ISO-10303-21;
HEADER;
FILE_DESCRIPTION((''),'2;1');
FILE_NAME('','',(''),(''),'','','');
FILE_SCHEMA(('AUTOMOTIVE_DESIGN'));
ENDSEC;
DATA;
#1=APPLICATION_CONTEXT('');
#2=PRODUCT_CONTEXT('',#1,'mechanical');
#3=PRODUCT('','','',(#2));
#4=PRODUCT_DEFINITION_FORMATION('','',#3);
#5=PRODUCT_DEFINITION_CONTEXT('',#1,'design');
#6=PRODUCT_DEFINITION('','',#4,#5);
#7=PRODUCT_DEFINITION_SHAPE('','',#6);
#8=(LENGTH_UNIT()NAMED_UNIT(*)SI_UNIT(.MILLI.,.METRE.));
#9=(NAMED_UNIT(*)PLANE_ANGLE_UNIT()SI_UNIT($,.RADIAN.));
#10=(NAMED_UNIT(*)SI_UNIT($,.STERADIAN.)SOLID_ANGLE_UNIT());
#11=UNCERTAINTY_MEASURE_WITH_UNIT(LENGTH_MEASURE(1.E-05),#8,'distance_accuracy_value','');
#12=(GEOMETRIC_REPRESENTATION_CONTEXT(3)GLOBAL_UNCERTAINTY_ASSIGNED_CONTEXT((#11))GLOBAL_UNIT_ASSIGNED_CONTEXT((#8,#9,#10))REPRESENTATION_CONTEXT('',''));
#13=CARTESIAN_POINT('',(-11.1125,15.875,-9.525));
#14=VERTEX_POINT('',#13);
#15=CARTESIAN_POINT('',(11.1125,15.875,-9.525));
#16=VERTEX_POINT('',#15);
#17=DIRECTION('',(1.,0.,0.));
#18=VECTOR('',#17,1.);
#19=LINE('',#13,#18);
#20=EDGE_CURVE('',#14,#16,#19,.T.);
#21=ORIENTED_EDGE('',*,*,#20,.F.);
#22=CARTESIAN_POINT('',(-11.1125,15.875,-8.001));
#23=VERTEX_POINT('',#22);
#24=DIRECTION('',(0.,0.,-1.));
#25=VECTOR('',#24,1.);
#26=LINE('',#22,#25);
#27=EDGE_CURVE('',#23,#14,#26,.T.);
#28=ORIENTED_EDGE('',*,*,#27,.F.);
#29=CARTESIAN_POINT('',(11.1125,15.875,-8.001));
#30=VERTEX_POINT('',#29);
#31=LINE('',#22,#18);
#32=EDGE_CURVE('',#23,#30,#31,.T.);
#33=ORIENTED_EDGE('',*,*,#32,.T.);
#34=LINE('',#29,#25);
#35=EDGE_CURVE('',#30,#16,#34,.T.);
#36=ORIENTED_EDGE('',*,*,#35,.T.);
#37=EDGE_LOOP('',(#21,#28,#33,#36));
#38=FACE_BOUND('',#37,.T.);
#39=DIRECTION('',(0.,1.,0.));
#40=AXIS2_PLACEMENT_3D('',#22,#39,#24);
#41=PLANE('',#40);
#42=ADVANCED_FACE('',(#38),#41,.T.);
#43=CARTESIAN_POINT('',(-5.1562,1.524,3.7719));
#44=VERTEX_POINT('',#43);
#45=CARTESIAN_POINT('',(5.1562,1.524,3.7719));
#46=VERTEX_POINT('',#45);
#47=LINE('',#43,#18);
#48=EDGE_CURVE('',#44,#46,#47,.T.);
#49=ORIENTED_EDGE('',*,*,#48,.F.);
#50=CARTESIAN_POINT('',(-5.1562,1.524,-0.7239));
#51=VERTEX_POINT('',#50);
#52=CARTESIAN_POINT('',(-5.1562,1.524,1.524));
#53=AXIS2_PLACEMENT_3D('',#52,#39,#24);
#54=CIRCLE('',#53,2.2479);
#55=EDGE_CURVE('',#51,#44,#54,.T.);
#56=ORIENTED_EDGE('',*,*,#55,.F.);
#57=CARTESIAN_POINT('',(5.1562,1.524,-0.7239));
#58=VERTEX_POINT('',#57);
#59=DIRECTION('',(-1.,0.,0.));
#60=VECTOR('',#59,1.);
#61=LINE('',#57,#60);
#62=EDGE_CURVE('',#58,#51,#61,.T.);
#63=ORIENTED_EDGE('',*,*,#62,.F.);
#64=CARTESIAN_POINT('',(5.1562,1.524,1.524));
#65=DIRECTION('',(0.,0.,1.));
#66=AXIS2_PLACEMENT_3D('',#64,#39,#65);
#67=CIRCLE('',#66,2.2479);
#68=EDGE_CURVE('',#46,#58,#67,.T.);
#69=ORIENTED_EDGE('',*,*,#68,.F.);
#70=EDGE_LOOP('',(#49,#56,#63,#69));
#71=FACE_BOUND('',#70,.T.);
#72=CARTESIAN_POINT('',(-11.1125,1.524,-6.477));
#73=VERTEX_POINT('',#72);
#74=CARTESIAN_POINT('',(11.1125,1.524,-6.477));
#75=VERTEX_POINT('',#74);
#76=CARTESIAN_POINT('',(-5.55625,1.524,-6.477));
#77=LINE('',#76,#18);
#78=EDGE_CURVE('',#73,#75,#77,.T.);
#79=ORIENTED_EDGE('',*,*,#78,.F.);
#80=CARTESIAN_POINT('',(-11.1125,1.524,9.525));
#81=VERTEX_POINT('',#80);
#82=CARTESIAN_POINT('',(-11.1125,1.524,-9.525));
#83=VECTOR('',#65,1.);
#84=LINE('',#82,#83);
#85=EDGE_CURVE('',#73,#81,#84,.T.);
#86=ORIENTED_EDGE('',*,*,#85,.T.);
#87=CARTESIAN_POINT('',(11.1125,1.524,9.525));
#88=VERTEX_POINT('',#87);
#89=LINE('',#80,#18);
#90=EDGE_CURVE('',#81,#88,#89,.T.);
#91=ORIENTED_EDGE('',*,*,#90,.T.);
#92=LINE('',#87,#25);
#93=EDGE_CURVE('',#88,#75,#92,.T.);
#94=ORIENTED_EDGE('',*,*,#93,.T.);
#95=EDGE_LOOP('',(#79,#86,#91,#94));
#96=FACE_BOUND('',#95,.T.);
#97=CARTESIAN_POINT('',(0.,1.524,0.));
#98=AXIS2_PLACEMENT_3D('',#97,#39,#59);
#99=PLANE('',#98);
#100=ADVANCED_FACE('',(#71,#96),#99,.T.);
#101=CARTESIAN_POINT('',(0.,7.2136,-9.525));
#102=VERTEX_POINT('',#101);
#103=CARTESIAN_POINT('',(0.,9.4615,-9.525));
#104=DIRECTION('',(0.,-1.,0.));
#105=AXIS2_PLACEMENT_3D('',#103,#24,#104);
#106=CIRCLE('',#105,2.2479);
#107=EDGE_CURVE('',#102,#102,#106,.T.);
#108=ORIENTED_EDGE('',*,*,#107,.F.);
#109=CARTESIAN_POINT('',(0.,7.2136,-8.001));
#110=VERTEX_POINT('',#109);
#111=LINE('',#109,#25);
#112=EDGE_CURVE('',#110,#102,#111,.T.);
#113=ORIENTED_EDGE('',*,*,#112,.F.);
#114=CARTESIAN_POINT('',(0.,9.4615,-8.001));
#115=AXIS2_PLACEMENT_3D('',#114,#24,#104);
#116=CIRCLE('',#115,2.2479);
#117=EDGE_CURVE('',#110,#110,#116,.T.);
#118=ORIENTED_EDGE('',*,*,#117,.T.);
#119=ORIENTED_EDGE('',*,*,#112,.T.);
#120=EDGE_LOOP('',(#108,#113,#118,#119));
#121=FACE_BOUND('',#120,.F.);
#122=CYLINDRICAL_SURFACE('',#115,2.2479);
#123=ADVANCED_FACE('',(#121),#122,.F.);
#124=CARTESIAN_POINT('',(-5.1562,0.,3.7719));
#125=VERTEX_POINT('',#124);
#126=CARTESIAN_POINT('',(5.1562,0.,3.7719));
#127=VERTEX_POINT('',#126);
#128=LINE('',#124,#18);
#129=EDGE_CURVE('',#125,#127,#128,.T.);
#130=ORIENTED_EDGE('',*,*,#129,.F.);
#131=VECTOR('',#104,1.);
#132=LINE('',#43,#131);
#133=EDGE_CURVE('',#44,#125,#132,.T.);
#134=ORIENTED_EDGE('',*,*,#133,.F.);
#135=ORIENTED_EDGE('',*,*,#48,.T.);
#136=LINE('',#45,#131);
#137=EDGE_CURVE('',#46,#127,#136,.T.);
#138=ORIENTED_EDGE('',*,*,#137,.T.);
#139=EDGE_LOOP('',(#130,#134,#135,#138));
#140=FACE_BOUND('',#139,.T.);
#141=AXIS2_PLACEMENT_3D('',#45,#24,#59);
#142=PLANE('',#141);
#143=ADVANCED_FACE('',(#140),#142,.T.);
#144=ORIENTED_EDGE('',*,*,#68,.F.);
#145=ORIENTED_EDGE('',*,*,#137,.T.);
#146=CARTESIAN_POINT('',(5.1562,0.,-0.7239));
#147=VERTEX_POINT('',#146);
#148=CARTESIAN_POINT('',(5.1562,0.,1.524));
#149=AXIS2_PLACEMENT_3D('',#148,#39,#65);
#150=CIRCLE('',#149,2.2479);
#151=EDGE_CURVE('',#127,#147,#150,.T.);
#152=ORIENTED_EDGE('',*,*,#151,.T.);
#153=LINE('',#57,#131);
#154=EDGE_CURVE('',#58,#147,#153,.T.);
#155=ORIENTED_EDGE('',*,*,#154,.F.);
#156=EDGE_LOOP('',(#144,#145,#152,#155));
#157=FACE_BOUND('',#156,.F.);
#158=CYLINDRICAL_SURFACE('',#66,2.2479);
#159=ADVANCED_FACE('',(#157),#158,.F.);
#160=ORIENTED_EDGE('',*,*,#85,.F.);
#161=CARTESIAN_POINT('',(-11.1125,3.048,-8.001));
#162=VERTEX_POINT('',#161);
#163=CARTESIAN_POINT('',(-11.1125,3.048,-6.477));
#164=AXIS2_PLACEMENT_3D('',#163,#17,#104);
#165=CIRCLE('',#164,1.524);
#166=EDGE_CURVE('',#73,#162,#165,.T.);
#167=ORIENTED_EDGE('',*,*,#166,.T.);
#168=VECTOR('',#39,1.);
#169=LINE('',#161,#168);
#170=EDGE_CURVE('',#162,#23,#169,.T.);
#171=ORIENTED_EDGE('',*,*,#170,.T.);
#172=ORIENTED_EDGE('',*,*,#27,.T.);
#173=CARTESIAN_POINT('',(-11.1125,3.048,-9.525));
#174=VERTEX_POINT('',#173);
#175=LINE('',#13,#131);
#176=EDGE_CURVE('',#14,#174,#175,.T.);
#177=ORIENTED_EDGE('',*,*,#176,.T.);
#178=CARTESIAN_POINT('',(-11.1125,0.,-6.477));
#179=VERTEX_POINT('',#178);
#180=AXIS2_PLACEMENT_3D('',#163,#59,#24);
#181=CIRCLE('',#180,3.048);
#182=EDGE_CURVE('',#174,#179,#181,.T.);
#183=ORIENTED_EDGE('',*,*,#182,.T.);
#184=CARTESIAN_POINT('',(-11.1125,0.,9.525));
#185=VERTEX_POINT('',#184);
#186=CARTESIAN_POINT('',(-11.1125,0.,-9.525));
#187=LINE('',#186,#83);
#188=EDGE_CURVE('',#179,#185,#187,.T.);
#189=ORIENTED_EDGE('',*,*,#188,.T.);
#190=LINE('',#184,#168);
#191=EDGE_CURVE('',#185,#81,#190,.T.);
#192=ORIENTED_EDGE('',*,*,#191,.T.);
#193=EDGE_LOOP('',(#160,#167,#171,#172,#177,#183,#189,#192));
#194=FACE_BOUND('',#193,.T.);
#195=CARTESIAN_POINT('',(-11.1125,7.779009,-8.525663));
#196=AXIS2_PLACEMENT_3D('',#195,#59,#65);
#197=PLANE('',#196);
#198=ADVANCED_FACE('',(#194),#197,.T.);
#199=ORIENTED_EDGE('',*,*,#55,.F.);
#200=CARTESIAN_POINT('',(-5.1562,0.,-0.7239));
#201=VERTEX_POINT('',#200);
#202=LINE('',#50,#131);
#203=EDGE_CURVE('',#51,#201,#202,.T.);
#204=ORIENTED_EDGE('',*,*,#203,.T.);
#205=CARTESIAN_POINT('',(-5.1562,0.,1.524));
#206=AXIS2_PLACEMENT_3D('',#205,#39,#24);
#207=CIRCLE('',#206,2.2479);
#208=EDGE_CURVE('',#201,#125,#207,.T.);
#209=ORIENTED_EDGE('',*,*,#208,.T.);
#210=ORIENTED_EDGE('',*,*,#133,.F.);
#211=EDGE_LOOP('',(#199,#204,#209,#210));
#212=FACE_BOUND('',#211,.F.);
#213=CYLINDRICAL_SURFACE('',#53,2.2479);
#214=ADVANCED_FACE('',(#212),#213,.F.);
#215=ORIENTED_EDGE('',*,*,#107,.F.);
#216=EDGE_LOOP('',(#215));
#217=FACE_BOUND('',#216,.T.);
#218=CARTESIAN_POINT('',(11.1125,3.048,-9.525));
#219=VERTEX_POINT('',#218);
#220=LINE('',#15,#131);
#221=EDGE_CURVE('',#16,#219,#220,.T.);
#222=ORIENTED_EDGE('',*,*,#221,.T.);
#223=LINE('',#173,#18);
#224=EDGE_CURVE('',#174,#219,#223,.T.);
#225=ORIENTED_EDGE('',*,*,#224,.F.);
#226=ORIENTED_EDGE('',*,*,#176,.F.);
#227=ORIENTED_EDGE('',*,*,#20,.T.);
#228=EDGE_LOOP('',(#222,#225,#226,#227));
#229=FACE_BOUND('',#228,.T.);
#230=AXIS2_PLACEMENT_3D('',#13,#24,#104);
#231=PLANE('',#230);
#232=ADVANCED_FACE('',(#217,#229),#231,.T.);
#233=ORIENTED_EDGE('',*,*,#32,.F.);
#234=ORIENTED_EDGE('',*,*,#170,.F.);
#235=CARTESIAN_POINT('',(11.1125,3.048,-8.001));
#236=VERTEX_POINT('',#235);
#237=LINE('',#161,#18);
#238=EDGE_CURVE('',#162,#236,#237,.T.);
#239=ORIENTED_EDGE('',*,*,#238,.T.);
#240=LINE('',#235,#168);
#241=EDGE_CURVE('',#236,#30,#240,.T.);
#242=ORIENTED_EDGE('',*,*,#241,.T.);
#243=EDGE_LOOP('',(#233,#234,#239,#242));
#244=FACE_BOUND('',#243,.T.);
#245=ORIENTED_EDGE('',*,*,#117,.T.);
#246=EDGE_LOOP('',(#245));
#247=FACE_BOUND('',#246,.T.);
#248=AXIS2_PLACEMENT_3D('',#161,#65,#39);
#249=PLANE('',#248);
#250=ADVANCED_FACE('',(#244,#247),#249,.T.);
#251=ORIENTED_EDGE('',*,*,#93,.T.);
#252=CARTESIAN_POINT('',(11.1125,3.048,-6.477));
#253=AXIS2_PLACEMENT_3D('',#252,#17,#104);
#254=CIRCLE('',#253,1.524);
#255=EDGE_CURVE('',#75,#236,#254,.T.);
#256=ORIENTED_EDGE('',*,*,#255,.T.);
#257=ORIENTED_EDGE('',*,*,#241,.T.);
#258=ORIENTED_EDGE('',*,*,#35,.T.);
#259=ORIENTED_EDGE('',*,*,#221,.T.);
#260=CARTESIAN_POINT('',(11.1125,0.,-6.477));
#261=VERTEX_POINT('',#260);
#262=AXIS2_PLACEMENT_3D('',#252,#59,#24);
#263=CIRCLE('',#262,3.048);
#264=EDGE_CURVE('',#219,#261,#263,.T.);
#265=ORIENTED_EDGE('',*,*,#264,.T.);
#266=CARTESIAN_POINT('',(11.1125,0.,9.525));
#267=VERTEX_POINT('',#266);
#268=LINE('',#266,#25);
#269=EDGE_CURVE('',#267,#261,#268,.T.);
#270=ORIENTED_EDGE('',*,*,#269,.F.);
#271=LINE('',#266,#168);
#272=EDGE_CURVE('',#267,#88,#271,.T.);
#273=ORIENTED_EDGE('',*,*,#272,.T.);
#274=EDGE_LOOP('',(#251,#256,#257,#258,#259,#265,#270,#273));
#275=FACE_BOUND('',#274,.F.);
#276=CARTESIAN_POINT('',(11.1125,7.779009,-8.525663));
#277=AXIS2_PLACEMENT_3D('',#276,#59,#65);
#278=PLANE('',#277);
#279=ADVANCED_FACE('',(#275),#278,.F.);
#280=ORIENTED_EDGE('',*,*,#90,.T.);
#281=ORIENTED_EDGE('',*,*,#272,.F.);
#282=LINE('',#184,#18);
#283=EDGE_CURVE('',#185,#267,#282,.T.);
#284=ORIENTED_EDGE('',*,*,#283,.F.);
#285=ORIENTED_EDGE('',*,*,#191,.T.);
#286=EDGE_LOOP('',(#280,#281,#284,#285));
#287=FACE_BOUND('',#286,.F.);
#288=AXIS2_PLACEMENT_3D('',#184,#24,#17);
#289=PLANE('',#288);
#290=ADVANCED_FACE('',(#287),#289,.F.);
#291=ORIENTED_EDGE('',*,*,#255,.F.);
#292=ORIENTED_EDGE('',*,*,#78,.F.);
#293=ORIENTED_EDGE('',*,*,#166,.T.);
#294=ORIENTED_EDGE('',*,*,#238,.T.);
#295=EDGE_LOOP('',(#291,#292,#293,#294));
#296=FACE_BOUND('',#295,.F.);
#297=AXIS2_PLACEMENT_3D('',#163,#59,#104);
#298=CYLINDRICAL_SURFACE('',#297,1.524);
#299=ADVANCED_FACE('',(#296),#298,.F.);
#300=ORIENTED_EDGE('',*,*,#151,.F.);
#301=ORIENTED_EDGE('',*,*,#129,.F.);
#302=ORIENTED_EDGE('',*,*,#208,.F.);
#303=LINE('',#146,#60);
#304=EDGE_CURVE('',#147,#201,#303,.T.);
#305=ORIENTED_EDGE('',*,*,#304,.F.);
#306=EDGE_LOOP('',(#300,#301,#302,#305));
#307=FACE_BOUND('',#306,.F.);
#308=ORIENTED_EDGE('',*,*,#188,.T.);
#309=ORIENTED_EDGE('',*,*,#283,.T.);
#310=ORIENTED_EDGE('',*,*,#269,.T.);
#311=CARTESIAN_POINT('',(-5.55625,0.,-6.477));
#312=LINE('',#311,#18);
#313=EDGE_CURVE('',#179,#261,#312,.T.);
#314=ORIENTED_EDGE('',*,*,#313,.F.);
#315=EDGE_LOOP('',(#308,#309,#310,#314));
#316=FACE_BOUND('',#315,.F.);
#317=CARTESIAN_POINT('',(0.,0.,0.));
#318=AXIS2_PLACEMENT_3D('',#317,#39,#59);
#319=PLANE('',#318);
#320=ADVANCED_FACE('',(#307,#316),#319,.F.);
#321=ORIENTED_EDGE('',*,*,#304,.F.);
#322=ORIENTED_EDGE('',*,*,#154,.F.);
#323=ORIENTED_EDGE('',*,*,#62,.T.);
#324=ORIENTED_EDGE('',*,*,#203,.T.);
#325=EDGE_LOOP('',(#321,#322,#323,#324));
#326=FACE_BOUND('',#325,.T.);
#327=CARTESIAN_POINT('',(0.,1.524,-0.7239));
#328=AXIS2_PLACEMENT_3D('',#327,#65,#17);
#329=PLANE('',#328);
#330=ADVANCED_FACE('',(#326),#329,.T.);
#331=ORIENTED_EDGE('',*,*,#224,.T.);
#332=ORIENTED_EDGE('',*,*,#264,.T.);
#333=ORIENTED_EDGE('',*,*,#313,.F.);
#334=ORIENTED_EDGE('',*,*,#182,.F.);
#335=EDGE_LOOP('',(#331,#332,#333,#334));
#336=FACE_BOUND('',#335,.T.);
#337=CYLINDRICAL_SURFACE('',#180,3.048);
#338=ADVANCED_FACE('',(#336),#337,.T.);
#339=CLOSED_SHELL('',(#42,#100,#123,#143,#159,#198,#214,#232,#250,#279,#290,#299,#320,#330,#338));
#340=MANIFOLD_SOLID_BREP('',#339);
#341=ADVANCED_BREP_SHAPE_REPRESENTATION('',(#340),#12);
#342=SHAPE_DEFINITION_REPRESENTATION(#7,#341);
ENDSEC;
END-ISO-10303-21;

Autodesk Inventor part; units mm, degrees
ref_plane "YZ Plane" through (0, 0, 0) normal (1, 0, 0) x (0, 1, 0)
ref_plane "XZ Plane" through (0, 0, 0) normal (0, 1, 0) x (-1, 0, 0)
ref_plane "XY Plane" through (0, 0, 0) normal (0, 0, 1) x (1, 0, 0)
sketch "Sketch1" plane through (0, 0, 0) normal (0, 1, 0) x (-1, 0, 0)
  line L0 (11.1125, 9.525) -> (-11.1125, 9.525)
  line L1 (-11.1125, 9.525) -> (-11.1125, -9.525)
  line L2 (-11.1125, -9.525) -> (11.1125, -9.525)
  line L3 (11.1125, -9.525) -> (11.1125, 9.525)
  line L4 (11.1125, 9.525) -> (-11.1125, -9.525) construction
  line L5 (-11.1125, 9.525) -> (11.1125, -9.525) construction
  point P0 (0, 0)
  dimension "d0" = 22.225
  dimension "d1" = 19.05
extrude "Plate1" add sketch "Sketch1" along normal blind 1.524
sketch "Sketch2" plane through (-11.1125, 0, -8.001) normal (0, 0, -1) x (-1, 0, 0)
  line L0 (-22.225, 0) -> (0, 0)
  line L1 (0, 0) -> (0, 15.875)
  line L2 (0, 15.875) -> (-22.225, 15.875)
  line L3 (-22.225, 15.875) -> (-22.225, 0)
edge flange "Flange1" height 15.875 angle 90 thickness 1.524 bend radius 1.524 thickness toward (0, 0, -1) relief tear relief width 1.524 relief depth 0.762 edges at (0, 1.524, -9.525) wall of the first edge with corners at (11.1125, 0, -8.001) (-11.1125, 0, -8.001) (-11.1125, 15.875, -8.001) (11.1125, 15.875, -8.001)
bend "Bend1"
corner "Corner1"
sketch "Sketch3" plane through (0, 1.524, 0) normal (0, 1, 0) x (1, 0, 0)
  line L0 (11.1125, 6.477) -> (-11.1125, 6.477) projected
  line L1 (-11.1125, -9.525) -> (-11.1125, 6.477) projected
  line L2 (11.1125, -9.525) -> (-11.1125, -9.525) projected
  line L3 (11.1125, 6.477) -> (11.1125, -9.525) projected
  line L4 (-11.1125, -1.524) -> (11.1125, -1.524) construction
  line L5 (0, 6.477) -> (0, -9.525) construction
  circle A0 centre (0, -1.524) radius 2.2479
  line L6 (-5.1562, -1.524) -> (5.1562, -1.524) construction
  line L7 (-5.1562, 0.7239) -> (5.1562, 0.7239)
  line L8 (5.1562, -3.7719) -> (-5.1562, -3.7719)
  arc A1 (-5.1562, 0.7239) -> (-5.1562, -3.7719) centre (-5.1562, -1.524) ccw
  arc A2 (5.1562, -3.7719) -> (5.1562, 0.7239) centre (5.1562, -1.524) ccw
  point P0 (0, 0)
  dimension "d13" = 16.002
  dimension "d14" = 22.225
  dimension "d24" = 4.4958
  dimension "d25" = 3.7084
sketch "Sketch4" plane through (-11.1125, 15.875, -8.001) normal (0, 0, 1) x (1, 0, 0)
  line L0 (0, -12.827) -> (22.225, -12.827) projected
  line L1 (22.225, 0) -> (22.225, -12.827) projected
  line L2 (22.225, 0) -> (0, 0) projected
  line L3 (0, 0) -> (0, -12.827) projected
  line L4 (0, -6.4135) -> (22.225, -6.4135) construction
  line L5 (22.225, 0) -> (22.225, -12.827) construction
  line L6 (11.1125, -12.827) -> (11.1125, 0) construction
  line L7 (22.225, 0) -> (0, 0) construction
  point P0 (11.1125, -15.875)
  point P1 (11.1125, -6.4135)
  dimension "d15" = 22.225
  dimension "d16" = 12.827
hole "Hole1" at (0, 9.4615, -8.001) direction (0, 0, -1) diameter 4.4958 depth 1.524 tip angle 118 clearance for "Flat Head Machine Screw (82)" size "#8" standard "Ansi Unified Screw Threads"
extrude "Cut1" cut sketch "Sketch3" against normal blind 1.524 contours A0 | A0 L7 A2 L8 | A0 L8 A1 L7
sketch "Sketch7" plane through (11.1125, 15.875, -9.525) normal (0, 0, -1) x (-1, 0, 0)
  line L0 (0, 0) -> (22.225, 0) projected
  line L1 (22.225, -15.875) -> (0, -15.875) projected
  line L2 (0, -12.827) -> (22.225, -12.827) projected
  point P0 (11.1125, -15.875)
  dimension "d28" = 15.875
  dimension "d29" = 12.827
  dimension "d30" = 22.225
sketch "Sketch8" plane through (0, 0, 0) normal (0, -1, 0) x (1, 0, 0)
  arc A0 (-5.1562, 3.7719) -> (-5.1562, -0.7239) centre (-5.1562, 1.524) ccw projected
  line L0 (-5.1562, 3.7719) -> (5.1562, 3.7719) projected
  arc A1 (5.1562, -0.7239) -> (5.1562, 3.7719) centre (5.1562, 1.524) ccw projected
  line L1 (5.1562, -0.7239) -> (-5.1562, -0.7239) projected
  line L2 (-11.1125, -6.477) -> (11.1125, -6.477) projected
  line L3 (11.1125, 9.525) -> (11.1125, -6.477) projected
  line L4 (-11.1125, 9.525) -> (11.1125, 9.525) projected
  line L5 (-11.1125, -6.477) -> (-11.1125, 9.525) projected
  line L6 (11.1125, -9.525) -> (-11.1125, -9.525) projected
  line L7 (11.1125, -6.477) -> (11.1125, -9.525) projected
  line L8 (-11.1125, -6.477) -> (11.1125, -6.477) projected
  line L9 (-11.1125, -9.525) -> (-11.1125, -6.477) projected
  point P0 (0, 0)
  dimension "d31" = 19.05
  dimension "d32" = 16.002
sketch "Sketch9" plane through (0, 1.524, 0) normal (0, 1, 0) x (1, 0, 0)
  arc A0 (5.1562, -3.7719) -> (5.1562, 0.7239) centre (5.1562, -1.524) ccw projected
  arc A1 (-5.1562, 0.7239) -> (-5.1562, -3.7719) centre (-5.1562, -1.524) ccw projected
  line L0 (5.1562, -3.7719) -> (-5.1562, -3.7719) projected
  line L1 (-5.1562, 0.7239) -> (5.1562, 0.7239) projected
  circle A2 centre (0, -1.524) radius 2.2479
  point P0 (0, 0)
  dimension "d34" = 5.1562
sketch "Sketch10" plane through (-11.1125, 15.875, -9.525) normal (0, 1, 0) x (1, 0, 0)
  line L0 (22.225, -19.05) -> (0, -19.05) projected
  line L1 (22.225, 0) -> (0, 0) projected
  line L2 (0, -1.524) -> (0, 0) projected
  line L3 (0, -1.524) -> (0, -3.048) projected
  line L4 (0, -19.05) -> (0, -3.048) projected
  line L5 (0, 0) -> (7.1374, 0)
  line L6 (7.1374, 0) -> (7.1374, -19.05)
  line L7 (7.1374, -19.05) -> (0, -19.05)
  line L8 (0, -19.05) -> (0, 0)
  line L9 (22.225, 0) -> (15.0876, 0)
  line L10 (15.0876, 0) -> (15.0876, -19.05)
  line L11 (15.0876, -19.05) -> (22.225, -19.05)
  line L12 (22.225, -19.05) -> (22.225, 0)
  point P0 (11.1125, -9.525)
  dimension "d35" = 7.1374
  dimension "d36" = 7.1374
equation "\"d22\" = Thickness"
equation "\"d26\" = Thickness"
equation "\"d36\" = d35"
equation "\"d3\" = BendReliefWidth"
equation "\"d4\" = BendReliefDepth"
equation "\"d5\" = MinimumRemnant"
equation "\"d6\" = BendRadius"
equation "\"d9\" = BendRadius"
equation "\"d10\" = CornerReliefSize"
equation "\"d11\" = GapSize"
equation "\"d12\" = JacobiRadiusSize"
equation "\"BendRadius\" = Thickness"
equation "\"BendReliefWidth\" = Thickness"
equation "\"BendReliefDepth\" = 0.5 * Thickness"
equation "\"CornerReliefSize\" = 4 * Thickness"
equation "\"MinimumRemnant\" = 2 * Thickness"
equation "\"TransitionRadius\" = BendRadius"
equation "\"JacobiRadiusSize\" = BendRadius"
equation "\"GapSize\" = Thickness"
equation "\"d2\" = BendRadius"
equation "\"Thickness\" = 1.524"
properties part number "Bracket (15275A53)" material "Steel"
